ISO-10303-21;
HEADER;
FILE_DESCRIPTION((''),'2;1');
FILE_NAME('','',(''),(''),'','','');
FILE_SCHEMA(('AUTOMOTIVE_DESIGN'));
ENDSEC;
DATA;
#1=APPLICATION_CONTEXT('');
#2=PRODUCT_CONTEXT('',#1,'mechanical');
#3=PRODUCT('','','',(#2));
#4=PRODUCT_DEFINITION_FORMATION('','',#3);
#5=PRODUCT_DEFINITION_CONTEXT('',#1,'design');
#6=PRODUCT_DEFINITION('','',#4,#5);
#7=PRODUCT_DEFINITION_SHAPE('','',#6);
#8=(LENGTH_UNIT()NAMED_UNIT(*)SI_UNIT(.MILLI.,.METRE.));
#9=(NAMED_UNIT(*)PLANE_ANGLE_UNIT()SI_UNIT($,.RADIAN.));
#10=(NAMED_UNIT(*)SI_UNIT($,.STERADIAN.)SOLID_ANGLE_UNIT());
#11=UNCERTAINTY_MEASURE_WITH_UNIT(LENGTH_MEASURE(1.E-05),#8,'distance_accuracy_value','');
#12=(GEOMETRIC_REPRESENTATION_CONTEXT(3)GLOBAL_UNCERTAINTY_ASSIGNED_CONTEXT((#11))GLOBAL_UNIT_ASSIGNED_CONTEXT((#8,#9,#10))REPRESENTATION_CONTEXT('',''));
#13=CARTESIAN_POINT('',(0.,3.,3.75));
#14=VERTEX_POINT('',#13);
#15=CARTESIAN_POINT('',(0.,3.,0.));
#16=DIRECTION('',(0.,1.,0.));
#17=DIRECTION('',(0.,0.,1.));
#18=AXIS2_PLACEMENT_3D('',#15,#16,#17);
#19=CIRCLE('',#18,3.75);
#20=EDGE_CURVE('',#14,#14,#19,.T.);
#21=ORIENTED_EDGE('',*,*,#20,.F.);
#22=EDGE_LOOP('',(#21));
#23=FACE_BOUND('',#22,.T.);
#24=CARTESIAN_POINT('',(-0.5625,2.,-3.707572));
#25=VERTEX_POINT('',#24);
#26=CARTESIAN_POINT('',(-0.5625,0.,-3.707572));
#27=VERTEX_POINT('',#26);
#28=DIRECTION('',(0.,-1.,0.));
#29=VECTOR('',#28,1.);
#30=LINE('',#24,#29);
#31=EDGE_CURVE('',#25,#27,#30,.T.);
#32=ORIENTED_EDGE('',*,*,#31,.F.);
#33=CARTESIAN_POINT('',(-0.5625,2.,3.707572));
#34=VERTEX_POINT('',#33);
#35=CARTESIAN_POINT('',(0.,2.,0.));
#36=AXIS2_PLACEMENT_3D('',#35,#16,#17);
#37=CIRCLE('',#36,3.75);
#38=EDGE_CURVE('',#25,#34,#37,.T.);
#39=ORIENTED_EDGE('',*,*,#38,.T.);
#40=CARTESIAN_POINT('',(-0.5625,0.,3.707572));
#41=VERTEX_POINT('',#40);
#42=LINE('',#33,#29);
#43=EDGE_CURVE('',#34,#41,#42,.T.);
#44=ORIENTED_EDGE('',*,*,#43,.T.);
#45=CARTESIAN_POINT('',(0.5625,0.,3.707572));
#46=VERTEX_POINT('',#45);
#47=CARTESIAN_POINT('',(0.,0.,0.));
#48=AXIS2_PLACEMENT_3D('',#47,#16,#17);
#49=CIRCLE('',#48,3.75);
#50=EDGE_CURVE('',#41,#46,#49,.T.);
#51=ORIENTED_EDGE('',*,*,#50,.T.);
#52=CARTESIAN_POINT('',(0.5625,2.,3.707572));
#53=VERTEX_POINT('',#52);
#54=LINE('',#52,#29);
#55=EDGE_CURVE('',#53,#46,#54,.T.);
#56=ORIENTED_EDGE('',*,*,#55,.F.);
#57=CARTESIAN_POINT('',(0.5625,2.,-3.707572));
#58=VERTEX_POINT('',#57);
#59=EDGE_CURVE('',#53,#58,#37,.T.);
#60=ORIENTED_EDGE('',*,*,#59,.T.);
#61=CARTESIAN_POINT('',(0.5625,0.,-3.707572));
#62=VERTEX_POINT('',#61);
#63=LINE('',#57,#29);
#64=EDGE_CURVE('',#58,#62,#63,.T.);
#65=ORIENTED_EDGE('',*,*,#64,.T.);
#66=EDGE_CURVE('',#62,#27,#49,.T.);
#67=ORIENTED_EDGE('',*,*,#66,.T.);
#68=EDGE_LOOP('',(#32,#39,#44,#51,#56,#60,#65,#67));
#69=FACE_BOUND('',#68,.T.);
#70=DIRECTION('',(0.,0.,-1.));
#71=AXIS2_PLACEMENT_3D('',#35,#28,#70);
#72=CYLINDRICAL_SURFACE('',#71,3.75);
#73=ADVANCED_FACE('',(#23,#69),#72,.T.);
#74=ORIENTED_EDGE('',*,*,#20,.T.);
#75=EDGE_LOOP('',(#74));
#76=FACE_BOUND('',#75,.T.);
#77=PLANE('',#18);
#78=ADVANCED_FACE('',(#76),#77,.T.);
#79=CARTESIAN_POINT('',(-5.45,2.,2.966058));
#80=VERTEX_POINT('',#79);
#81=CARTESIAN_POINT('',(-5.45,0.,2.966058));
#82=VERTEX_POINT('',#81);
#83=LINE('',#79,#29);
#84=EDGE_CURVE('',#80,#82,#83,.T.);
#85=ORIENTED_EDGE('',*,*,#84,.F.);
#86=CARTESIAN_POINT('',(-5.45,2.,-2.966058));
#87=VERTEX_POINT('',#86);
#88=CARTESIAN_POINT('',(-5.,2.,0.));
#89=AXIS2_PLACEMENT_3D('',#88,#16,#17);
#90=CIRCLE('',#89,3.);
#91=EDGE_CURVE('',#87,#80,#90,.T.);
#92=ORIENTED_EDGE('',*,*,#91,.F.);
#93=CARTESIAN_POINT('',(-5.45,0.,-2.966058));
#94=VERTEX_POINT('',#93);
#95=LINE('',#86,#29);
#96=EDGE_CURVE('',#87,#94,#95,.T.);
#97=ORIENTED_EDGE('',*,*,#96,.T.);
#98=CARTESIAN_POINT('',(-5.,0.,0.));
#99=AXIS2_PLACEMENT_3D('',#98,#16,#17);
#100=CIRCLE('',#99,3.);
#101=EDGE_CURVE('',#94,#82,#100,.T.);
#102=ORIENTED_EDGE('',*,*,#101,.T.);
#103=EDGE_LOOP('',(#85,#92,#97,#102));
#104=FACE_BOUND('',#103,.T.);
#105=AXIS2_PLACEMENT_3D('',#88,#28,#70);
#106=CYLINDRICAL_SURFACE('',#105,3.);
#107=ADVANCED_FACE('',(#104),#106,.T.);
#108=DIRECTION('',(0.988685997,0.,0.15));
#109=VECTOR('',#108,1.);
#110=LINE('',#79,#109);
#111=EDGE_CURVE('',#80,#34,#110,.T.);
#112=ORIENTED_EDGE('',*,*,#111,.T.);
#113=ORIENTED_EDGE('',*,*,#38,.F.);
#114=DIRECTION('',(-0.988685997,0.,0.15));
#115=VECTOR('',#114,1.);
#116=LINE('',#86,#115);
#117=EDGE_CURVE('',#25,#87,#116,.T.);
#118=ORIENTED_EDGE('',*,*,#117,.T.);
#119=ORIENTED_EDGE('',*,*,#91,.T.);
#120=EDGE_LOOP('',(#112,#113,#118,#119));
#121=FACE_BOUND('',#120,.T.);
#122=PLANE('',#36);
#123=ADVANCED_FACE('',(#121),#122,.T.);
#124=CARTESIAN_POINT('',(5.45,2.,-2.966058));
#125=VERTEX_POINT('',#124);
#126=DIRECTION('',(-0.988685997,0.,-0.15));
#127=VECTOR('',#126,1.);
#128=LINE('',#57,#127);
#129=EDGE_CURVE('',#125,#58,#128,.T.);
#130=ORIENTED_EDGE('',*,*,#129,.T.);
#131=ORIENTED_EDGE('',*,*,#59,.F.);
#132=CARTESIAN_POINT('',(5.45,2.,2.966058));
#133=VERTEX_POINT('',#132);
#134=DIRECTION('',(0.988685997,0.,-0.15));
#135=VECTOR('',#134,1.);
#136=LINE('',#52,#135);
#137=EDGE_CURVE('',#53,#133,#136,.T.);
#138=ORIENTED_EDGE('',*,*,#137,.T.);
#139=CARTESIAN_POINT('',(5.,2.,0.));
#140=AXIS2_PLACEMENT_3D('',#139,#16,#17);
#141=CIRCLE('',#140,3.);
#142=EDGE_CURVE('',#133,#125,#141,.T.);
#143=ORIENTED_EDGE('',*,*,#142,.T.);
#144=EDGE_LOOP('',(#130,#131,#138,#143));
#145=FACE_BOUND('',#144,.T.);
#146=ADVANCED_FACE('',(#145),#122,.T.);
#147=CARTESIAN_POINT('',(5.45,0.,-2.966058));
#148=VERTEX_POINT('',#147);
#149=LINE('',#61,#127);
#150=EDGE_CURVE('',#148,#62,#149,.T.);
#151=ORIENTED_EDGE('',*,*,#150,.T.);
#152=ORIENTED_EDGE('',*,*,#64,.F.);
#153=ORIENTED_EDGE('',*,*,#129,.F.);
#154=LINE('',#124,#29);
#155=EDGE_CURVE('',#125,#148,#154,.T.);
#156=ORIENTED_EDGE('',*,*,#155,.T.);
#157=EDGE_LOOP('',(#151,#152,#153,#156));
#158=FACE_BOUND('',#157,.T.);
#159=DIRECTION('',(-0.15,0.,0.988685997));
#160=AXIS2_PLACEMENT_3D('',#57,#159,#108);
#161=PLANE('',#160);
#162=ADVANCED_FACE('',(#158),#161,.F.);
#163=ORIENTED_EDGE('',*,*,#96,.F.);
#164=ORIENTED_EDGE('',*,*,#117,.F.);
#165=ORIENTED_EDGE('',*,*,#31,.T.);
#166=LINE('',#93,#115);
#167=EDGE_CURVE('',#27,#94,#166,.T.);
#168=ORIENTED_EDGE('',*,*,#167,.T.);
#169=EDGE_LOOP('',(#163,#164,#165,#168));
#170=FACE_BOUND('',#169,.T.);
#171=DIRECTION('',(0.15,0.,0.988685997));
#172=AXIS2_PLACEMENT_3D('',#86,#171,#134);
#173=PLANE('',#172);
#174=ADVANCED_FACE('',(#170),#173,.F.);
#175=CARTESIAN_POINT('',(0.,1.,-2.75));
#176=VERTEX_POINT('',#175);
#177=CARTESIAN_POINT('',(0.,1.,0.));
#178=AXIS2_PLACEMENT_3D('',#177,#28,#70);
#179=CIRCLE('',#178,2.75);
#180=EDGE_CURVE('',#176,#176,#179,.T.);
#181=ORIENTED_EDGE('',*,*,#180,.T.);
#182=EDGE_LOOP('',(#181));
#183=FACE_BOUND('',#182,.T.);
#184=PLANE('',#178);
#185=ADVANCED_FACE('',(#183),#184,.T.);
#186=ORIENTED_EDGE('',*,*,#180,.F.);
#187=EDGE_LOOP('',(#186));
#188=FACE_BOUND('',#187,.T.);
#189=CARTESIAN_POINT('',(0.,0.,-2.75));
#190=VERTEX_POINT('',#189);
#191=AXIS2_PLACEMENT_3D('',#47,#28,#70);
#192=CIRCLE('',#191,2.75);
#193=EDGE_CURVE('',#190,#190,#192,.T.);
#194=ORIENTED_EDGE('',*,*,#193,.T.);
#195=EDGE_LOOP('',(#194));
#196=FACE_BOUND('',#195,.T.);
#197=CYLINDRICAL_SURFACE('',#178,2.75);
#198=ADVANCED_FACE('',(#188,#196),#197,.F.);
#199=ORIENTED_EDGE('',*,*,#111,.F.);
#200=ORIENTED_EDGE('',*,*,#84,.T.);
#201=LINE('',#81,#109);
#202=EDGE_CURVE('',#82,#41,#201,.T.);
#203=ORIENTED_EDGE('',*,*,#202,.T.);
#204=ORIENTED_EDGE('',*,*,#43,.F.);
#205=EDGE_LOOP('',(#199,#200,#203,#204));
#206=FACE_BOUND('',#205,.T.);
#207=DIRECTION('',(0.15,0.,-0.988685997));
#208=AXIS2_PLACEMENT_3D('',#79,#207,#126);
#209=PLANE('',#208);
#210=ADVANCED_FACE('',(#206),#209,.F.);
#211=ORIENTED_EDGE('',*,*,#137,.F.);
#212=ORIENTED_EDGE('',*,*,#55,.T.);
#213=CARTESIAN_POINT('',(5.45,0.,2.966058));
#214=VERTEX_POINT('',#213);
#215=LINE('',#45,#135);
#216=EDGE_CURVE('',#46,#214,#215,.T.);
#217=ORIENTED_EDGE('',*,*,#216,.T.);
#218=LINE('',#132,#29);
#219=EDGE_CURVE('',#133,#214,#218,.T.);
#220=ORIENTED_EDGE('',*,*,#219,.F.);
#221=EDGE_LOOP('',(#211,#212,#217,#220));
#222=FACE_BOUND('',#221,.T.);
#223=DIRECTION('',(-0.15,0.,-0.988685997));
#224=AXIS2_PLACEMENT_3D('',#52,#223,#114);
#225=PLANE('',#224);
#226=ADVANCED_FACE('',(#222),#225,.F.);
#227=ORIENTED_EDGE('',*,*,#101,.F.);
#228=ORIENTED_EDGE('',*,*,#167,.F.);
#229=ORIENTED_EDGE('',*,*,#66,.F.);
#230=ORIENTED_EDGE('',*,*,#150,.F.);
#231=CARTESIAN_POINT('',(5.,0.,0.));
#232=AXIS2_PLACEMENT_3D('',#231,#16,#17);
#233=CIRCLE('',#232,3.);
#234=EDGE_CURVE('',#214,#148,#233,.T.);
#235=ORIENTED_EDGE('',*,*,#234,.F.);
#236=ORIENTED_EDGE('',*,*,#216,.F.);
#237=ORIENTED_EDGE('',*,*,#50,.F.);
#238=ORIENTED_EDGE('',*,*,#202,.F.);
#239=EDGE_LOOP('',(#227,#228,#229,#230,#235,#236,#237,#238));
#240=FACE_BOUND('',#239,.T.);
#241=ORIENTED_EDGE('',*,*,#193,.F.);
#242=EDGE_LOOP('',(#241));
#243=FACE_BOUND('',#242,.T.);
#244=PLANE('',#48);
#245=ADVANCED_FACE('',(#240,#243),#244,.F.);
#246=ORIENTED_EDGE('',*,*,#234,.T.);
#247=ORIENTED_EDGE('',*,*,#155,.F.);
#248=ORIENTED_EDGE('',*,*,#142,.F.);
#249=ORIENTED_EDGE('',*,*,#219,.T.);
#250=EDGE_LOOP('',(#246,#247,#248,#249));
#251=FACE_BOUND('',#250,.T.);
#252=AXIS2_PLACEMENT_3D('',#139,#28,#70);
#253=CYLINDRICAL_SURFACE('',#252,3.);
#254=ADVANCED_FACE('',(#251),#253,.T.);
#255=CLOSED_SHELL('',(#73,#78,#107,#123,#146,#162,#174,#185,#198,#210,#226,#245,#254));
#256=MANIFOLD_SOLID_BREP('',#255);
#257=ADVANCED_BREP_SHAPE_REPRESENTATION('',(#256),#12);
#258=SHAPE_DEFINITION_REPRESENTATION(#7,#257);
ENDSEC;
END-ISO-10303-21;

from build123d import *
from build123d.topology import SkipClean

# Parameters (mm, degrees)
BOSS_EXTRUDE1_DEPTH = 2
SKETCH2_R           = 3.75
BOSS_EXTRUDE2_DEPTH = 1
SKETCH3_R           = 2.75
CUT_EXTRUDE1_DEPTH  = 1


with BuildPart() as part:
    # Sketch1 → Boss-Extrude1 (new body)
    with BuildSketch(Plane(origin=(0, 0, 0), x_dir=(1, 0, 0), z_dir=(0, 1, 0))):
        with BuildLine():
            Line((0.5625, 3.707572487), (5.45, 2.96605799))
            ThreePointArc((5.45, 2.96605799), (8, 0), (5.45, -2.96605799))
            Line((5.45, -2.96605799), (0.5625, -3.707572487))
            ThreePointArc((0.5625, -3.707572487), (0, -3.75), (-0.5625, -3.707572487))
            Line((-0.5625, -3.707572487), (-5.45, -2.96605799))
            ThreePointArc((-5.45, -2.96605799), (-8, 0), (-5.45, 2.96605799))
            Line((-5.45, 2.96605799), (-0.5625, 3.707572487))
            ThreePointArc((-0.5625, 3.707572487), (0, 3.75), (0.5625, 3.707572487))
        make_face()
    extrude(amount=BOSS_EXTRUDE1_DEPTH)

    # Sketch2 → Boss-Extrude2 (add)
    with SkipClean():  # the faces are left unmerged after this step: merging them gives an invalid solid
        with BuildSketch(Plane(origin=(0, 2, 0), x_dir=(1, 0, 0), z_dir=(0, 1, 0))):
            Circle(SKETCH2_R)
        extrude(amount=BOSS_EXTRUDE2_DEPTH)
    add(part.part.scale(1), mode=Mode.REPLACE)  # the faces are merged on a copy

    # Sketch3 → Cut-Extrude1 (cut)
    with BuildSketch(Plane.XZ):
        Circle(SKETCH3_R)
    extrude(amount=-CUT_EXTRUDE1_DEPTH, mode=Mode.SUBTRACT)


solid = part.part
